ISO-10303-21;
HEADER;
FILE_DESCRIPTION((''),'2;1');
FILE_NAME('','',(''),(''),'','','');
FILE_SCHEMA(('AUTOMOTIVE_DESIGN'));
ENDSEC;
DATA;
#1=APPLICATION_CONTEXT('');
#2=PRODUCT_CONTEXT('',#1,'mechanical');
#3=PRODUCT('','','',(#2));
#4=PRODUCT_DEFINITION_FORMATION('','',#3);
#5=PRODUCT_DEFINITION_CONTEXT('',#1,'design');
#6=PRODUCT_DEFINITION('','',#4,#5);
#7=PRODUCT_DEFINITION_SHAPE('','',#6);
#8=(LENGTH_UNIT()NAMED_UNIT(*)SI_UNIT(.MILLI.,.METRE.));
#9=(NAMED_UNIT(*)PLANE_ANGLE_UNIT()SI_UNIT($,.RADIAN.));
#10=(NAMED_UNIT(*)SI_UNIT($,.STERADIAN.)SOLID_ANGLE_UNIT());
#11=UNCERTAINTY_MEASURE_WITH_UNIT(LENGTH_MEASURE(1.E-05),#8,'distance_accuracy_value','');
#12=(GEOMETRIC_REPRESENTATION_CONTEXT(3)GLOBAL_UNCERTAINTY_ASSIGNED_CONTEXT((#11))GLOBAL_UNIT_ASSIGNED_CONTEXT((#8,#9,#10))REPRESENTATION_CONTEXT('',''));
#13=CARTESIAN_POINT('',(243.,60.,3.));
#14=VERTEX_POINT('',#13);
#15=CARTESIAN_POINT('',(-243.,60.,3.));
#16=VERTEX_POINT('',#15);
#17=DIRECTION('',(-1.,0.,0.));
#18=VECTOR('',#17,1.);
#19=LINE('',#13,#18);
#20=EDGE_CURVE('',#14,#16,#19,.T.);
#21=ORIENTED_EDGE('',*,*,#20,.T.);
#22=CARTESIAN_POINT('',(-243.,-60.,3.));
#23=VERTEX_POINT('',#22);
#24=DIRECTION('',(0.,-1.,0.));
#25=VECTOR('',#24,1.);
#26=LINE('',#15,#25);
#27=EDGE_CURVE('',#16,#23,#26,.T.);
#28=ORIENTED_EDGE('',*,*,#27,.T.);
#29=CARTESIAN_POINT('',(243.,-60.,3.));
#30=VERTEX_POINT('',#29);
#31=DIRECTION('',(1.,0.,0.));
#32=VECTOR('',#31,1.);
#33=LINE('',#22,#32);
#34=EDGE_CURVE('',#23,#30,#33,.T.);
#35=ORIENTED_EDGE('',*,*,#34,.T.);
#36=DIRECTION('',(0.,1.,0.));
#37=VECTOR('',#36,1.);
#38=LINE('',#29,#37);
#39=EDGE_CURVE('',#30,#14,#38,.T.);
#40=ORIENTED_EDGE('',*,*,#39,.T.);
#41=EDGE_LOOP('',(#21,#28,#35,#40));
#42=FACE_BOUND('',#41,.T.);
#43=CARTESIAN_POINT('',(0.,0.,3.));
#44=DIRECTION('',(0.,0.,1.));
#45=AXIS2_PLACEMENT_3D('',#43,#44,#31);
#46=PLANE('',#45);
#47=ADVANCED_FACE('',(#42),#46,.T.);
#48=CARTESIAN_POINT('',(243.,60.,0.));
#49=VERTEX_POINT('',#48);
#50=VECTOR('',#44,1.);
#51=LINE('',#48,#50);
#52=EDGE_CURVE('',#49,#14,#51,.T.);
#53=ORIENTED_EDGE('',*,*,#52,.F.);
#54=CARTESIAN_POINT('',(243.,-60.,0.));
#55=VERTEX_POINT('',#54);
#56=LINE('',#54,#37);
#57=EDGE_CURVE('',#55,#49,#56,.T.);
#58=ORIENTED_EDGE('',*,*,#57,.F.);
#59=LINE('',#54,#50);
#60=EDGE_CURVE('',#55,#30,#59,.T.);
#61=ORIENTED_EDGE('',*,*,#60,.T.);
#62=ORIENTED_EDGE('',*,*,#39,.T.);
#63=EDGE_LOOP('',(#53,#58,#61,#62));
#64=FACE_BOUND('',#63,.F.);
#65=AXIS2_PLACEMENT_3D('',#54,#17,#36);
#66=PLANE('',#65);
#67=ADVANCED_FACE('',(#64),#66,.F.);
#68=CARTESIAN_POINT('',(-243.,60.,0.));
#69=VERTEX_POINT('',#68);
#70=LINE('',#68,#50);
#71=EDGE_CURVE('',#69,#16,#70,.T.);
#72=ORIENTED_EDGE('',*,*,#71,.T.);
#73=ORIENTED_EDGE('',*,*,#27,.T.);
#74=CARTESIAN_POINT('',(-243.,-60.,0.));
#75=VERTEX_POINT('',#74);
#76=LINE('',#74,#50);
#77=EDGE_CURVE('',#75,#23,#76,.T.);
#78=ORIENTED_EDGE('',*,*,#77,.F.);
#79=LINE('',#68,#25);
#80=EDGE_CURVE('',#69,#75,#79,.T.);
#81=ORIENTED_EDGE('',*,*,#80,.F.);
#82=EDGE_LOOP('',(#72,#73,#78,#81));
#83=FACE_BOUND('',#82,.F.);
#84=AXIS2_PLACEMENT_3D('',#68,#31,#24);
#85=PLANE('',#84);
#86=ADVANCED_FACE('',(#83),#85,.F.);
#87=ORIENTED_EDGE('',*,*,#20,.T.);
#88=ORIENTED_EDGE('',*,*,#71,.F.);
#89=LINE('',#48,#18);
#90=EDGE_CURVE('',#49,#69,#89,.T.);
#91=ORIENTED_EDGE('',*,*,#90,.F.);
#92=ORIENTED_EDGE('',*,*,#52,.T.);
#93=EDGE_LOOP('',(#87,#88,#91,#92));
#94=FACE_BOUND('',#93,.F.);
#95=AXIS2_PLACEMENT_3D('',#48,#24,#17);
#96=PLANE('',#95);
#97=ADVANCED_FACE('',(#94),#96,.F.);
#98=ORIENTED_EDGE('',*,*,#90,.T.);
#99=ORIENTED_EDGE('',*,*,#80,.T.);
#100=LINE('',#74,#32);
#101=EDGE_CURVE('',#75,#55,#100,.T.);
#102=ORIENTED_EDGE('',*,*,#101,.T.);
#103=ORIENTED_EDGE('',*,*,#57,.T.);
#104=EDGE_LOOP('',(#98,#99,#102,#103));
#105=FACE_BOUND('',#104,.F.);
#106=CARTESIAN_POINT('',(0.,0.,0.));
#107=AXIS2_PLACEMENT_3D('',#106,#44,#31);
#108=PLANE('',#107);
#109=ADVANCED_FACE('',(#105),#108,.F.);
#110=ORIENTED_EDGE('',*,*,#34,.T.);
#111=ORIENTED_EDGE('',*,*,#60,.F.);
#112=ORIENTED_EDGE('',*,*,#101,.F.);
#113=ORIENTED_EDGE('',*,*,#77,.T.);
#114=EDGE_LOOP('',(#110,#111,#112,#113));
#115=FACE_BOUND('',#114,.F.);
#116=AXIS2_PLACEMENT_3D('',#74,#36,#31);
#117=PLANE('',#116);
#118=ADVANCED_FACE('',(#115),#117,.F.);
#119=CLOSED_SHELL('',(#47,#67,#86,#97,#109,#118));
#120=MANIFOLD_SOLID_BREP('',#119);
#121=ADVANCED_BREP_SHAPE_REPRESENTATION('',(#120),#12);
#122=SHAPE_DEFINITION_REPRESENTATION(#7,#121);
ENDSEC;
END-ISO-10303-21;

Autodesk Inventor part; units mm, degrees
ref_plane "YZ Plane" through (0, 0, 0) normal (1, 0, 0) x (0, 1, 0)
ref_plane "XZ Plane" through (0, 0, 0) normal (0, 1, 0) x (-1, 0, 0)
ref_plane "XY Plane" through (0, 0, 0) normal (0, 0, 1) x (1, 0, 0)
sketch "Sketch1" plane through (0, 0, 0) normal (0, 0, 1) x (1, 0, 0)
  line L0 (-243, -60) -> (243, -60)
  line L1 (243, -60) -> (243, 60)
  line L2 (243, 60) -> (-243, 60)
  line L3 (-243, 60) -> (-243, -60)
  line L4 (-243, -60) -> (243, 60) construction
  line L5 (243, -60) -> (-243, 60) construction
  point P0 (0, 0)
  dimension "d0" = 486
  dimension "d1" = 120
extrude "Plate1" add sketch "Sketch1" along normal blind 3
sketch "Sketch2" plane through (0, 0, 0) normal (0, 0, -1) x (-1, 0, 0)
  line L0 (-223, 40) -> (-23, 40) construction
  line L1 (-23, 40) -> (-23, 20) construction
  line L2 (-23, 20) -> (-223, 20) construction
  line L3 (-223, 20) -> (-223, 40) construction
  line L4 (-243, 60) -> (243, 60) projected
  line L5 (-243, -60) -> (-243, 60) projected
  point P0 (0, 0)
  dimension "d6" = 200
  dimension "d9" = 20
  dimension "d10" = 20
  dimension "d11" = 20
mark "Mark1"
equation "\"d2\" = Thickness"
equation "\"BendReliefWidth\" = Thickness"
equation "\"BendReliefDepth\" = 0.5 * Thickness"
equation "\"CornerReliefSize\" = 4 * Thickness"
equation "\"MinimumRemnant\" = 2 * Thickness"
equation "\"TransitionRadius\" = BendRadius"
equation "\"JacobiRadiusSize\" = BendRadius"
equation "\"GapSize\" = Thickness"
equation "\"Thickness\" = 3"
equation "\"BendRadius\" = 2.75"
properties part number "TRM 021 bottom damper" material "AISI 304"
